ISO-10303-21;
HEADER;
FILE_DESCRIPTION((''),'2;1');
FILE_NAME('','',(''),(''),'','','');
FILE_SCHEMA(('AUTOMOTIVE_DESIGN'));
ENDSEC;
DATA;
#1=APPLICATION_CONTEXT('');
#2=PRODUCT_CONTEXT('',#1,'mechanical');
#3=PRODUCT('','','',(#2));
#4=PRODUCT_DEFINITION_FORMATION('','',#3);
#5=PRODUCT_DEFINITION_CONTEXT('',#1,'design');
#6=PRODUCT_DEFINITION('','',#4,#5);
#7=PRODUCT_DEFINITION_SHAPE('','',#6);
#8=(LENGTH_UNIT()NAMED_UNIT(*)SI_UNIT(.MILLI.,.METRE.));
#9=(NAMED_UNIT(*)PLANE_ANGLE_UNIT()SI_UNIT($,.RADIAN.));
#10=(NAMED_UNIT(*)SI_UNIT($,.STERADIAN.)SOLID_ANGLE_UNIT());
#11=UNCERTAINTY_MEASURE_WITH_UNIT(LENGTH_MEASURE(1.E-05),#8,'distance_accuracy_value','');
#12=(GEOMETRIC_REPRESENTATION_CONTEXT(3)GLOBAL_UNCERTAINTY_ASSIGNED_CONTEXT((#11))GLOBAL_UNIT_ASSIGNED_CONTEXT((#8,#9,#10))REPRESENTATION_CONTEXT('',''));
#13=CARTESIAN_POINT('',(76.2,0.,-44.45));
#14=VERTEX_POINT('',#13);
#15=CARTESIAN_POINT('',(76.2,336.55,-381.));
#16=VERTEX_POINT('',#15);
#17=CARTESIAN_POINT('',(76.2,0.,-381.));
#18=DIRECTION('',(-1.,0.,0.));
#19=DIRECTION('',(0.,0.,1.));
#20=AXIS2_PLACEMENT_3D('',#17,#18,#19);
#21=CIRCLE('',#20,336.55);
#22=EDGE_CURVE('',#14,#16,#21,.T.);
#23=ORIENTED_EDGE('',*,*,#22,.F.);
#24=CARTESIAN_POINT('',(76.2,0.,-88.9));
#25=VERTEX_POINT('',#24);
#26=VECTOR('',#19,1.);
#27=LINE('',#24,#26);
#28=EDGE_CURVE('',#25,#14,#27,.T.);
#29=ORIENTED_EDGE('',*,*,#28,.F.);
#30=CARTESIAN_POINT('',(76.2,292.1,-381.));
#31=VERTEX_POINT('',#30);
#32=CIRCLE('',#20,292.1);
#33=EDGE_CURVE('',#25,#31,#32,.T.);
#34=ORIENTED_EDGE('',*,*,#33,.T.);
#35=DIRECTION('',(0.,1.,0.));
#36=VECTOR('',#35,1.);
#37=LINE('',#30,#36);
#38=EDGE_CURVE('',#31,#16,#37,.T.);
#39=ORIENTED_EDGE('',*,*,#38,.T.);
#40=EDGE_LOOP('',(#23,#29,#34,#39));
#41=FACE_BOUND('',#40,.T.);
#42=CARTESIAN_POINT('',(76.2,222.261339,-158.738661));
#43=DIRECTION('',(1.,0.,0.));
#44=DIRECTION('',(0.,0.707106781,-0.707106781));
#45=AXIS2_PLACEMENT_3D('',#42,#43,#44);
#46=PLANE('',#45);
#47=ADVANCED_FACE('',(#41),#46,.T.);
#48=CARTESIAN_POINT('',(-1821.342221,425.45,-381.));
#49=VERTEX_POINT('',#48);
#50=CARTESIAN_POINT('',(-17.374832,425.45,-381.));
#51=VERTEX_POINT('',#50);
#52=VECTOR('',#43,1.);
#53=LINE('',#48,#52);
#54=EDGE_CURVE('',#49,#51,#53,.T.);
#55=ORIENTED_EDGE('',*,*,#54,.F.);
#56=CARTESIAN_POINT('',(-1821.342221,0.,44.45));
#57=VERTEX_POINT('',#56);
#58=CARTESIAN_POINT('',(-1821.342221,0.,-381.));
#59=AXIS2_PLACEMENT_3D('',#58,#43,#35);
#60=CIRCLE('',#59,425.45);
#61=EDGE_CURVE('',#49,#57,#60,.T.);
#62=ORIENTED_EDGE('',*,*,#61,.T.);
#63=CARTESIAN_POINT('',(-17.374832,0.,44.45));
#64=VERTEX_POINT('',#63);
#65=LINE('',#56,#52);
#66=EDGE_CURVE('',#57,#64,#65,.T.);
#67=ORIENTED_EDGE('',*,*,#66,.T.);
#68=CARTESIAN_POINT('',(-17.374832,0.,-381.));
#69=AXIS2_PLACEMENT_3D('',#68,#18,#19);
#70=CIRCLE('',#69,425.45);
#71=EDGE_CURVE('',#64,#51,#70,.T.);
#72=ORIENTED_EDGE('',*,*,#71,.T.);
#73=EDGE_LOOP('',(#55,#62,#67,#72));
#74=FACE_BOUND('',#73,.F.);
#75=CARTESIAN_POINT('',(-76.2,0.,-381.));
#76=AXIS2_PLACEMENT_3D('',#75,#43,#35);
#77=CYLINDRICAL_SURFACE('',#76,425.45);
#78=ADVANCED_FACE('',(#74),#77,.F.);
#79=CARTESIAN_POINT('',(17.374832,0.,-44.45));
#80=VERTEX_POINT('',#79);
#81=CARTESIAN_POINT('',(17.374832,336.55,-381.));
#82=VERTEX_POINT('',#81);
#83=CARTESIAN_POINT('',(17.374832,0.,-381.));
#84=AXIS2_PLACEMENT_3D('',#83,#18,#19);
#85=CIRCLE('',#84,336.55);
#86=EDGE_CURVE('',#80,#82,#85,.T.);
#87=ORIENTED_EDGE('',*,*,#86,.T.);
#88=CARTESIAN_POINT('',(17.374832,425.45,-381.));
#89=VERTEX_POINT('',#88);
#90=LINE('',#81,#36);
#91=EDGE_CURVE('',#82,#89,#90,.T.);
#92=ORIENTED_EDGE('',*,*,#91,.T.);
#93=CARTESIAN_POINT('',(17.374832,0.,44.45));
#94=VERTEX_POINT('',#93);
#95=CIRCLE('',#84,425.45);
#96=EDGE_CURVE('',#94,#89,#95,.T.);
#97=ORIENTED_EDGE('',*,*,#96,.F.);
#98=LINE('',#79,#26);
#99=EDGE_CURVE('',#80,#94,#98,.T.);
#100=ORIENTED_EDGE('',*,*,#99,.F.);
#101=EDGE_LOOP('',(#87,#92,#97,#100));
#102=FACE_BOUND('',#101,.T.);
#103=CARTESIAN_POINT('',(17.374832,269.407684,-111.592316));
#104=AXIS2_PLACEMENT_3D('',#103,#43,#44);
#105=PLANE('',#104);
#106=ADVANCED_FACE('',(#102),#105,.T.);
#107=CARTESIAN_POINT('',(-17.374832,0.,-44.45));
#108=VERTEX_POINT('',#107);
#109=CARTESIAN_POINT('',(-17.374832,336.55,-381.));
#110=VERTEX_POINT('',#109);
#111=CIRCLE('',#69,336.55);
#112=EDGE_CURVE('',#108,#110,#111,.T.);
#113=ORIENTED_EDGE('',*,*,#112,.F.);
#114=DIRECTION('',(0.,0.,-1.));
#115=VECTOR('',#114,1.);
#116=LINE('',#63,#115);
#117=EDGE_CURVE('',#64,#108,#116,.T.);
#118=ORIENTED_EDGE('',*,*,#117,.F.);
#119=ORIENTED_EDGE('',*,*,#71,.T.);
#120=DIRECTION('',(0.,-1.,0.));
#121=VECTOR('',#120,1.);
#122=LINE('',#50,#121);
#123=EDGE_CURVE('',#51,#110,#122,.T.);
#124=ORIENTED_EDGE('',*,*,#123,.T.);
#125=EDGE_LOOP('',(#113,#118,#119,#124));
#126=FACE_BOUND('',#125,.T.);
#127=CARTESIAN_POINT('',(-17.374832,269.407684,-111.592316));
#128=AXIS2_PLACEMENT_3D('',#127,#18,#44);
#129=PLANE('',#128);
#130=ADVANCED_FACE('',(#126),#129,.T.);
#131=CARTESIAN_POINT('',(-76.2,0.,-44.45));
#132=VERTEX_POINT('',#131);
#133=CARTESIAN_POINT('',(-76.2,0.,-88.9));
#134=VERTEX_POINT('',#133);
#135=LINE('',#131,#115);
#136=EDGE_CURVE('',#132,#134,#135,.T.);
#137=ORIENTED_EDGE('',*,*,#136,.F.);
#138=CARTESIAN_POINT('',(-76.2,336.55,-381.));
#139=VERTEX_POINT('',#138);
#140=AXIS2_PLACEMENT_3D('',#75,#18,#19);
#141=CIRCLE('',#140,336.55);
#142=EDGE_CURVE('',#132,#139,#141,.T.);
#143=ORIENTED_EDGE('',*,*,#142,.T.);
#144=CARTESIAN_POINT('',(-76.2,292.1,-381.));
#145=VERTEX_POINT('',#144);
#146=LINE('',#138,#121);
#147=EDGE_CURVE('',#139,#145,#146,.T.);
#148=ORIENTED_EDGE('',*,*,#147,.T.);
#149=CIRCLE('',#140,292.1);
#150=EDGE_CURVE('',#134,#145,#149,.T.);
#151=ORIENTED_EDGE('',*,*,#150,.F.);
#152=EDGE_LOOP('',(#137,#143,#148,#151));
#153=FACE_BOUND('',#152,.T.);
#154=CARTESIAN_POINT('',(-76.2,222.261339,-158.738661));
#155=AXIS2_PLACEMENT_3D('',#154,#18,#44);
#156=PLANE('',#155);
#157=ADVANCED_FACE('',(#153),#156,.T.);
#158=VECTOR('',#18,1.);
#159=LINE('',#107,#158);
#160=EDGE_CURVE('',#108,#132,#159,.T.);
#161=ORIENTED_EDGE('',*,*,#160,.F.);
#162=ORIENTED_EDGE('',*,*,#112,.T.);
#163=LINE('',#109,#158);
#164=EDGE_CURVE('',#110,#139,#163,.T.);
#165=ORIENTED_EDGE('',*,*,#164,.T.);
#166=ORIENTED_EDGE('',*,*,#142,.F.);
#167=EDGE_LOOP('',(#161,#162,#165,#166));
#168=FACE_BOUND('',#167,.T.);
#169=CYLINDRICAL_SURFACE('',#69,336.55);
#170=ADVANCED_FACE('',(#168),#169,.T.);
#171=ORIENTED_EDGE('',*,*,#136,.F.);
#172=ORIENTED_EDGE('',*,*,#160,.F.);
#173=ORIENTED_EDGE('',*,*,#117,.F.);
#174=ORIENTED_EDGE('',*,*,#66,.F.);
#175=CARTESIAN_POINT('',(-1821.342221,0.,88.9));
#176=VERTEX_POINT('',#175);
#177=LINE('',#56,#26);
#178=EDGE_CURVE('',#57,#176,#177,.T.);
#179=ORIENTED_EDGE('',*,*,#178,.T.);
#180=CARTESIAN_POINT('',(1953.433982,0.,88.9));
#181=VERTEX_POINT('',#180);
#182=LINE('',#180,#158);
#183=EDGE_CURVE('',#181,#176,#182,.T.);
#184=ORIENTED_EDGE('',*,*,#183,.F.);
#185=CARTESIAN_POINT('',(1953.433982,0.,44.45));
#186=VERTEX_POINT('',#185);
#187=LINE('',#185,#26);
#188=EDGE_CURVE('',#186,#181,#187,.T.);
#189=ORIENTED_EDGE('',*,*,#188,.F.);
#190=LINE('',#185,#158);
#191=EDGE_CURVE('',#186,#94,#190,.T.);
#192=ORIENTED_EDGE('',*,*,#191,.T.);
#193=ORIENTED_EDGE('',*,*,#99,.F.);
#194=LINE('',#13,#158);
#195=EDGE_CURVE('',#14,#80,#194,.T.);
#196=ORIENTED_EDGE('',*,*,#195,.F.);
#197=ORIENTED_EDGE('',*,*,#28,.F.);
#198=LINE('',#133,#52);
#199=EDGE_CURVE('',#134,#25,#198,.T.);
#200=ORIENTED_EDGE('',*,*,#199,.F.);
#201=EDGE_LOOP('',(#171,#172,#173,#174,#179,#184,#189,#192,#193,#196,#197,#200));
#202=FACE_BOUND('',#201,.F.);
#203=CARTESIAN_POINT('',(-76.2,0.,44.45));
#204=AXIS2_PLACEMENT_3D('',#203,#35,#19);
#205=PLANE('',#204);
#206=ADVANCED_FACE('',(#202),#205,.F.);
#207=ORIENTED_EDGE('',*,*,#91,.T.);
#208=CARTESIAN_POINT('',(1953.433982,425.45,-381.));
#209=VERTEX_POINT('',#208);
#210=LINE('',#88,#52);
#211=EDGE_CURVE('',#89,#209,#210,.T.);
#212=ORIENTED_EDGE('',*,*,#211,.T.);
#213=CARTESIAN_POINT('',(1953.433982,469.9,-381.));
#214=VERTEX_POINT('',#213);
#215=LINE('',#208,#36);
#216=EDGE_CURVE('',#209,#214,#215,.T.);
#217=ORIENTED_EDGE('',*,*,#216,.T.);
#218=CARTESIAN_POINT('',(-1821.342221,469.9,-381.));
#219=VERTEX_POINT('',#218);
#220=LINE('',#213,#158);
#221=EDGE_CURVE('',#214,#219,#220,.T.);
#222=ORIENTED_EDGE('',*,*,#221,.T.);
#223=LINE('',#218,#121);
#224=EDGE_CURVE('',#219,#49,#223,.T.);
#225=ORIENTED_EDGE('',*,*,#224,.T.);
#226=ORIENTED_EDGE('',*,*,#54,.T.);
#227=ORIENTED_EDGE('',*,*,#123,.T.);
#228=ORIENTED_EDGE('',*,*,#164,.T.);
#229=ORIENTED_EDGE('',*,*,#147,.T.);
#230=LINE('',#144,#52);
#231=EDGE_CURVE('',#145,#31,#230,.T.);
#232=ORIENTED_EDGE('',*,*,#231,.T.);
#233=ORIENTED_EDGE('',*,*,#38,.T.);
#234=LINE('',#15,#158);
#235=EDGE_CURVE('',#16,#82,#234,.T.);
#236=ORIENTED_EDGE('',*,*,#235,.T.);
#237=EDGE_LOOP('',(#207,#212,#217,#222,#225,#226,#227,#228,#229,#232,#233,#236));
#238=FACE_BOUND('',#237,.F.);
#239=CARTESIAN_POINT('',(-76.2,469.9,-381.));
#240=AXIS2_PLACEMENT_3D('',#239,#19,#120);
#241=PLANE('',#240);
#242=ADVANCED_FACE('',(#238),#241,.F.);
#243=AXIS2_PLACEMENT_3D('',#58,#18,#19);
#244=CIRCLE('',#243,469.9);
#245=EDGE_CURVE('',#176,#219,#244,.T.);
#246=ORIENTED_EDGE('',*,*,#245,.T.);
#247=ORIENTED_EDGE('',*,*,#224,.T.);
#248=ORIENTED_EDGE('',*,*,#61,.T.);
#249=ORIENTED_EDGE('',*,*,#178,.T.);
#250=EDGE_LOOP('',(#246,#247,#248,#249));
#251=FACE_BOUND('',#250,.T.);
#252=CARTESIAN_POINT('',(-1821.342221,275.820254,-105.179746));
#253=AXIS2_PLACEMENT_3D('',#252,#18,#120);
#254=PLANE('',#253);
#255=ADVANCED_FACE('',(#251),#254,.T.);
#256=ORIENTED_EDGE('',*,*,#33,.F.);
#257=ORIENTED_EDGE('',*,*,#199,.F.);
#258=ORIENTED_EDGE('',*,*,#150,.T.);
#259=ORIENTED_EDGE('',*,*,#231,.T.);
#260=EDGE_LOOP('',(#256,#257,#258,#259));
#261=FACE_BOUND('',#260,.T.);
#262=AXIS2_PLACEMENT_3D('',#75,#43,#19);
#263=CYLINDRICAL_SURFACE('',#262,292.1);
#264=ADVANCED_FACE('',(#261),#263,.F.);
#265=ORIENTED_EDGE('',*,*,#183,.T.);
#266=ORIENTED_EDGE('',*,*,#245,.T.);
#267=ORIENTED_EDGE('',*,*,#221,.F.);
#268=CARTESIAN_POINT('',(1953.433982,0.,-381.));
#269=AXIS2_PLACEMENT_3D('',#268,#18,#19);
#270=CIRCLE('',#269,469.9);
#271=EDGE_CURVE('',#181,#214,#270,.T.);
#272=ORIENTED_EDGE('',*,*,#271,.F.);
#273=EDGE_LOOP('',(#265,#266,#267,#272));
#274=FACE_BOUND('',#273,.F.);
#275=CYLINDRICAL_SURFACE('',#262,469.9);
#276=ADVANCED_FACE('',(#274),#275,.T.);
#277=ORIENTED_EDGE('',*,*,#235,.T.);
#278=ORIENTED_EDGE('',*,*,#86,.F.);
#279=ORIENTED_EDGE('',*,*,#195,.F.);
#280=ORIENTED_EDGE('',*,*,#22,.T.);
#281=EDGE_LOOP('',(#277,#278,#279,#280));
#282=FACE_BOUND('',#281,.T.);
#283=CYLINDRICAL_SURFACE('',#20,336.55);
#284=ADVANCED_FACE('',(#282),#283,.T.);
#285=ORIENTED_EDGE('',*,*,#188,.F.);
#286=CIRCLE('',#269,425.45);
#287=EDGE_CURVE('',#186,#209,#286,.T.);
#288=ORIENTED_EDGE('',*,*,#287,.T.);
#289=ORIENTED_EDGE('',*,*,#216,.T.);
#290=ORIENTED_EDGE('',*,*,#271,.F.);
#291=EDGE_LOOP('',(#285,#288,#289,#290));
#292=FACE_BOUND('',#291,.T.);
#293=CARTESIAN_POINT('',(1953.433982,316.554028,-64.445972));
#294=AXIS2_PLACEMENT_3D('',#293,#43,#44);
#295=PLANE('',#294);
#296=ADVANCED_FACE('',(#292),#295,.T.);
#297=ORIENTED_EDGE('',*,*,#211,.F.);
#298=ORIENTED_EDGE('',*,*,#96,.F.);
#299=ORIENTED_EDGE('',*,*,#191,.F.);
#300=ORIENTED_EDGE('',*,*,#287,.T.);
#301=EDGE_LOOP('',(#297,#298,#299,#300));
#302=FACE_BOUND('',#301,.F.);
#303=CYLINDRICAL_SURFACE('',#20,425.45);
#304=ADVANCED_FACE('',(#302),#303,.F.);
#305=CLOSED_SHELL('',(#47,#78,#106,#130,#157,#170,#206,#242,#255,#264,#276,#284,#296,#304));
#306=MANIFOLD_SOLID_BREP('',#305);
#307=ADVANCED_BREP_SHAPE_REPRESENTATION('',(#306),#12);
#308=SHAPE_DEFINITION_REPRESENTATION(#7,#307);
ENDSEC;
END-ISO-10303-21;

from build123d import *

# Parameters (mm, degrees)
F4_DEPTH = 1877.2339820862
F5_DEPTH = 1745.1422214508


# Not quite as in the source:
# - a feature of the source that left no trace in its solid (it failed there, or was rolled back) is left out


with BuildPart() as f2:
    # F2: sweep along a path in F1
    with BuildLine(Plane.YZ) as f2_path:
        ThreePointArc((0, 0), (269.4076836321, -111.5923163679), (381, -381))
    # F0 (on Front) → F2 (sweep)
    with BuildSketch(Plane.XZ):
        Polygon((76.2, 88.9), (0, 88.9), (-76.2, 88.9), (-76.2, 44.45), (-17.3748321831, 44.45), (-17.3748321831, 0), (-17.3748321831, -44.45), (-76.2, -44.45), (-76.2, -88.9), (0, -88.9), (76.2, -88.9), (76.2, -44.45), (17.3748321831, -44.45), (17.3748321831, 0), (17.3748321831, 44.45), (76.2, 44.45), align=None)
    sweep(path=f2_path.line)

    # F4 (add): a face of the model
    f4_faces = [f2.faces().sort_by_distance(p)[0] for p in [
        (76.2, 305.5375800558, -75.4624199442),
    ]]
    extrude(f4_faces, amount=F4_DEPTH)

    # F3 (on face) → F5 (join)
    with BuildSketch(Plane(origin=(-76.2, 0, 0), x_dir=(0, -1, 0), z_dir=(-1, 0, 0))):
        with BuildLine():
            Line((0, 44.45), (0, 88.9))
            ThreePointArc((0, 88.9), (-332.2694764796, -48.7305235204), (-469.9, -381))
            Line((-469.9, -381), (-425.45, -381))
            ThreePointArc((-425.45, -381), (-300.8385800558, -80.1614199442), (0, 44.45))
        make_face()
    extrude(amount=F5_DEPTH)


solid = f2.part
